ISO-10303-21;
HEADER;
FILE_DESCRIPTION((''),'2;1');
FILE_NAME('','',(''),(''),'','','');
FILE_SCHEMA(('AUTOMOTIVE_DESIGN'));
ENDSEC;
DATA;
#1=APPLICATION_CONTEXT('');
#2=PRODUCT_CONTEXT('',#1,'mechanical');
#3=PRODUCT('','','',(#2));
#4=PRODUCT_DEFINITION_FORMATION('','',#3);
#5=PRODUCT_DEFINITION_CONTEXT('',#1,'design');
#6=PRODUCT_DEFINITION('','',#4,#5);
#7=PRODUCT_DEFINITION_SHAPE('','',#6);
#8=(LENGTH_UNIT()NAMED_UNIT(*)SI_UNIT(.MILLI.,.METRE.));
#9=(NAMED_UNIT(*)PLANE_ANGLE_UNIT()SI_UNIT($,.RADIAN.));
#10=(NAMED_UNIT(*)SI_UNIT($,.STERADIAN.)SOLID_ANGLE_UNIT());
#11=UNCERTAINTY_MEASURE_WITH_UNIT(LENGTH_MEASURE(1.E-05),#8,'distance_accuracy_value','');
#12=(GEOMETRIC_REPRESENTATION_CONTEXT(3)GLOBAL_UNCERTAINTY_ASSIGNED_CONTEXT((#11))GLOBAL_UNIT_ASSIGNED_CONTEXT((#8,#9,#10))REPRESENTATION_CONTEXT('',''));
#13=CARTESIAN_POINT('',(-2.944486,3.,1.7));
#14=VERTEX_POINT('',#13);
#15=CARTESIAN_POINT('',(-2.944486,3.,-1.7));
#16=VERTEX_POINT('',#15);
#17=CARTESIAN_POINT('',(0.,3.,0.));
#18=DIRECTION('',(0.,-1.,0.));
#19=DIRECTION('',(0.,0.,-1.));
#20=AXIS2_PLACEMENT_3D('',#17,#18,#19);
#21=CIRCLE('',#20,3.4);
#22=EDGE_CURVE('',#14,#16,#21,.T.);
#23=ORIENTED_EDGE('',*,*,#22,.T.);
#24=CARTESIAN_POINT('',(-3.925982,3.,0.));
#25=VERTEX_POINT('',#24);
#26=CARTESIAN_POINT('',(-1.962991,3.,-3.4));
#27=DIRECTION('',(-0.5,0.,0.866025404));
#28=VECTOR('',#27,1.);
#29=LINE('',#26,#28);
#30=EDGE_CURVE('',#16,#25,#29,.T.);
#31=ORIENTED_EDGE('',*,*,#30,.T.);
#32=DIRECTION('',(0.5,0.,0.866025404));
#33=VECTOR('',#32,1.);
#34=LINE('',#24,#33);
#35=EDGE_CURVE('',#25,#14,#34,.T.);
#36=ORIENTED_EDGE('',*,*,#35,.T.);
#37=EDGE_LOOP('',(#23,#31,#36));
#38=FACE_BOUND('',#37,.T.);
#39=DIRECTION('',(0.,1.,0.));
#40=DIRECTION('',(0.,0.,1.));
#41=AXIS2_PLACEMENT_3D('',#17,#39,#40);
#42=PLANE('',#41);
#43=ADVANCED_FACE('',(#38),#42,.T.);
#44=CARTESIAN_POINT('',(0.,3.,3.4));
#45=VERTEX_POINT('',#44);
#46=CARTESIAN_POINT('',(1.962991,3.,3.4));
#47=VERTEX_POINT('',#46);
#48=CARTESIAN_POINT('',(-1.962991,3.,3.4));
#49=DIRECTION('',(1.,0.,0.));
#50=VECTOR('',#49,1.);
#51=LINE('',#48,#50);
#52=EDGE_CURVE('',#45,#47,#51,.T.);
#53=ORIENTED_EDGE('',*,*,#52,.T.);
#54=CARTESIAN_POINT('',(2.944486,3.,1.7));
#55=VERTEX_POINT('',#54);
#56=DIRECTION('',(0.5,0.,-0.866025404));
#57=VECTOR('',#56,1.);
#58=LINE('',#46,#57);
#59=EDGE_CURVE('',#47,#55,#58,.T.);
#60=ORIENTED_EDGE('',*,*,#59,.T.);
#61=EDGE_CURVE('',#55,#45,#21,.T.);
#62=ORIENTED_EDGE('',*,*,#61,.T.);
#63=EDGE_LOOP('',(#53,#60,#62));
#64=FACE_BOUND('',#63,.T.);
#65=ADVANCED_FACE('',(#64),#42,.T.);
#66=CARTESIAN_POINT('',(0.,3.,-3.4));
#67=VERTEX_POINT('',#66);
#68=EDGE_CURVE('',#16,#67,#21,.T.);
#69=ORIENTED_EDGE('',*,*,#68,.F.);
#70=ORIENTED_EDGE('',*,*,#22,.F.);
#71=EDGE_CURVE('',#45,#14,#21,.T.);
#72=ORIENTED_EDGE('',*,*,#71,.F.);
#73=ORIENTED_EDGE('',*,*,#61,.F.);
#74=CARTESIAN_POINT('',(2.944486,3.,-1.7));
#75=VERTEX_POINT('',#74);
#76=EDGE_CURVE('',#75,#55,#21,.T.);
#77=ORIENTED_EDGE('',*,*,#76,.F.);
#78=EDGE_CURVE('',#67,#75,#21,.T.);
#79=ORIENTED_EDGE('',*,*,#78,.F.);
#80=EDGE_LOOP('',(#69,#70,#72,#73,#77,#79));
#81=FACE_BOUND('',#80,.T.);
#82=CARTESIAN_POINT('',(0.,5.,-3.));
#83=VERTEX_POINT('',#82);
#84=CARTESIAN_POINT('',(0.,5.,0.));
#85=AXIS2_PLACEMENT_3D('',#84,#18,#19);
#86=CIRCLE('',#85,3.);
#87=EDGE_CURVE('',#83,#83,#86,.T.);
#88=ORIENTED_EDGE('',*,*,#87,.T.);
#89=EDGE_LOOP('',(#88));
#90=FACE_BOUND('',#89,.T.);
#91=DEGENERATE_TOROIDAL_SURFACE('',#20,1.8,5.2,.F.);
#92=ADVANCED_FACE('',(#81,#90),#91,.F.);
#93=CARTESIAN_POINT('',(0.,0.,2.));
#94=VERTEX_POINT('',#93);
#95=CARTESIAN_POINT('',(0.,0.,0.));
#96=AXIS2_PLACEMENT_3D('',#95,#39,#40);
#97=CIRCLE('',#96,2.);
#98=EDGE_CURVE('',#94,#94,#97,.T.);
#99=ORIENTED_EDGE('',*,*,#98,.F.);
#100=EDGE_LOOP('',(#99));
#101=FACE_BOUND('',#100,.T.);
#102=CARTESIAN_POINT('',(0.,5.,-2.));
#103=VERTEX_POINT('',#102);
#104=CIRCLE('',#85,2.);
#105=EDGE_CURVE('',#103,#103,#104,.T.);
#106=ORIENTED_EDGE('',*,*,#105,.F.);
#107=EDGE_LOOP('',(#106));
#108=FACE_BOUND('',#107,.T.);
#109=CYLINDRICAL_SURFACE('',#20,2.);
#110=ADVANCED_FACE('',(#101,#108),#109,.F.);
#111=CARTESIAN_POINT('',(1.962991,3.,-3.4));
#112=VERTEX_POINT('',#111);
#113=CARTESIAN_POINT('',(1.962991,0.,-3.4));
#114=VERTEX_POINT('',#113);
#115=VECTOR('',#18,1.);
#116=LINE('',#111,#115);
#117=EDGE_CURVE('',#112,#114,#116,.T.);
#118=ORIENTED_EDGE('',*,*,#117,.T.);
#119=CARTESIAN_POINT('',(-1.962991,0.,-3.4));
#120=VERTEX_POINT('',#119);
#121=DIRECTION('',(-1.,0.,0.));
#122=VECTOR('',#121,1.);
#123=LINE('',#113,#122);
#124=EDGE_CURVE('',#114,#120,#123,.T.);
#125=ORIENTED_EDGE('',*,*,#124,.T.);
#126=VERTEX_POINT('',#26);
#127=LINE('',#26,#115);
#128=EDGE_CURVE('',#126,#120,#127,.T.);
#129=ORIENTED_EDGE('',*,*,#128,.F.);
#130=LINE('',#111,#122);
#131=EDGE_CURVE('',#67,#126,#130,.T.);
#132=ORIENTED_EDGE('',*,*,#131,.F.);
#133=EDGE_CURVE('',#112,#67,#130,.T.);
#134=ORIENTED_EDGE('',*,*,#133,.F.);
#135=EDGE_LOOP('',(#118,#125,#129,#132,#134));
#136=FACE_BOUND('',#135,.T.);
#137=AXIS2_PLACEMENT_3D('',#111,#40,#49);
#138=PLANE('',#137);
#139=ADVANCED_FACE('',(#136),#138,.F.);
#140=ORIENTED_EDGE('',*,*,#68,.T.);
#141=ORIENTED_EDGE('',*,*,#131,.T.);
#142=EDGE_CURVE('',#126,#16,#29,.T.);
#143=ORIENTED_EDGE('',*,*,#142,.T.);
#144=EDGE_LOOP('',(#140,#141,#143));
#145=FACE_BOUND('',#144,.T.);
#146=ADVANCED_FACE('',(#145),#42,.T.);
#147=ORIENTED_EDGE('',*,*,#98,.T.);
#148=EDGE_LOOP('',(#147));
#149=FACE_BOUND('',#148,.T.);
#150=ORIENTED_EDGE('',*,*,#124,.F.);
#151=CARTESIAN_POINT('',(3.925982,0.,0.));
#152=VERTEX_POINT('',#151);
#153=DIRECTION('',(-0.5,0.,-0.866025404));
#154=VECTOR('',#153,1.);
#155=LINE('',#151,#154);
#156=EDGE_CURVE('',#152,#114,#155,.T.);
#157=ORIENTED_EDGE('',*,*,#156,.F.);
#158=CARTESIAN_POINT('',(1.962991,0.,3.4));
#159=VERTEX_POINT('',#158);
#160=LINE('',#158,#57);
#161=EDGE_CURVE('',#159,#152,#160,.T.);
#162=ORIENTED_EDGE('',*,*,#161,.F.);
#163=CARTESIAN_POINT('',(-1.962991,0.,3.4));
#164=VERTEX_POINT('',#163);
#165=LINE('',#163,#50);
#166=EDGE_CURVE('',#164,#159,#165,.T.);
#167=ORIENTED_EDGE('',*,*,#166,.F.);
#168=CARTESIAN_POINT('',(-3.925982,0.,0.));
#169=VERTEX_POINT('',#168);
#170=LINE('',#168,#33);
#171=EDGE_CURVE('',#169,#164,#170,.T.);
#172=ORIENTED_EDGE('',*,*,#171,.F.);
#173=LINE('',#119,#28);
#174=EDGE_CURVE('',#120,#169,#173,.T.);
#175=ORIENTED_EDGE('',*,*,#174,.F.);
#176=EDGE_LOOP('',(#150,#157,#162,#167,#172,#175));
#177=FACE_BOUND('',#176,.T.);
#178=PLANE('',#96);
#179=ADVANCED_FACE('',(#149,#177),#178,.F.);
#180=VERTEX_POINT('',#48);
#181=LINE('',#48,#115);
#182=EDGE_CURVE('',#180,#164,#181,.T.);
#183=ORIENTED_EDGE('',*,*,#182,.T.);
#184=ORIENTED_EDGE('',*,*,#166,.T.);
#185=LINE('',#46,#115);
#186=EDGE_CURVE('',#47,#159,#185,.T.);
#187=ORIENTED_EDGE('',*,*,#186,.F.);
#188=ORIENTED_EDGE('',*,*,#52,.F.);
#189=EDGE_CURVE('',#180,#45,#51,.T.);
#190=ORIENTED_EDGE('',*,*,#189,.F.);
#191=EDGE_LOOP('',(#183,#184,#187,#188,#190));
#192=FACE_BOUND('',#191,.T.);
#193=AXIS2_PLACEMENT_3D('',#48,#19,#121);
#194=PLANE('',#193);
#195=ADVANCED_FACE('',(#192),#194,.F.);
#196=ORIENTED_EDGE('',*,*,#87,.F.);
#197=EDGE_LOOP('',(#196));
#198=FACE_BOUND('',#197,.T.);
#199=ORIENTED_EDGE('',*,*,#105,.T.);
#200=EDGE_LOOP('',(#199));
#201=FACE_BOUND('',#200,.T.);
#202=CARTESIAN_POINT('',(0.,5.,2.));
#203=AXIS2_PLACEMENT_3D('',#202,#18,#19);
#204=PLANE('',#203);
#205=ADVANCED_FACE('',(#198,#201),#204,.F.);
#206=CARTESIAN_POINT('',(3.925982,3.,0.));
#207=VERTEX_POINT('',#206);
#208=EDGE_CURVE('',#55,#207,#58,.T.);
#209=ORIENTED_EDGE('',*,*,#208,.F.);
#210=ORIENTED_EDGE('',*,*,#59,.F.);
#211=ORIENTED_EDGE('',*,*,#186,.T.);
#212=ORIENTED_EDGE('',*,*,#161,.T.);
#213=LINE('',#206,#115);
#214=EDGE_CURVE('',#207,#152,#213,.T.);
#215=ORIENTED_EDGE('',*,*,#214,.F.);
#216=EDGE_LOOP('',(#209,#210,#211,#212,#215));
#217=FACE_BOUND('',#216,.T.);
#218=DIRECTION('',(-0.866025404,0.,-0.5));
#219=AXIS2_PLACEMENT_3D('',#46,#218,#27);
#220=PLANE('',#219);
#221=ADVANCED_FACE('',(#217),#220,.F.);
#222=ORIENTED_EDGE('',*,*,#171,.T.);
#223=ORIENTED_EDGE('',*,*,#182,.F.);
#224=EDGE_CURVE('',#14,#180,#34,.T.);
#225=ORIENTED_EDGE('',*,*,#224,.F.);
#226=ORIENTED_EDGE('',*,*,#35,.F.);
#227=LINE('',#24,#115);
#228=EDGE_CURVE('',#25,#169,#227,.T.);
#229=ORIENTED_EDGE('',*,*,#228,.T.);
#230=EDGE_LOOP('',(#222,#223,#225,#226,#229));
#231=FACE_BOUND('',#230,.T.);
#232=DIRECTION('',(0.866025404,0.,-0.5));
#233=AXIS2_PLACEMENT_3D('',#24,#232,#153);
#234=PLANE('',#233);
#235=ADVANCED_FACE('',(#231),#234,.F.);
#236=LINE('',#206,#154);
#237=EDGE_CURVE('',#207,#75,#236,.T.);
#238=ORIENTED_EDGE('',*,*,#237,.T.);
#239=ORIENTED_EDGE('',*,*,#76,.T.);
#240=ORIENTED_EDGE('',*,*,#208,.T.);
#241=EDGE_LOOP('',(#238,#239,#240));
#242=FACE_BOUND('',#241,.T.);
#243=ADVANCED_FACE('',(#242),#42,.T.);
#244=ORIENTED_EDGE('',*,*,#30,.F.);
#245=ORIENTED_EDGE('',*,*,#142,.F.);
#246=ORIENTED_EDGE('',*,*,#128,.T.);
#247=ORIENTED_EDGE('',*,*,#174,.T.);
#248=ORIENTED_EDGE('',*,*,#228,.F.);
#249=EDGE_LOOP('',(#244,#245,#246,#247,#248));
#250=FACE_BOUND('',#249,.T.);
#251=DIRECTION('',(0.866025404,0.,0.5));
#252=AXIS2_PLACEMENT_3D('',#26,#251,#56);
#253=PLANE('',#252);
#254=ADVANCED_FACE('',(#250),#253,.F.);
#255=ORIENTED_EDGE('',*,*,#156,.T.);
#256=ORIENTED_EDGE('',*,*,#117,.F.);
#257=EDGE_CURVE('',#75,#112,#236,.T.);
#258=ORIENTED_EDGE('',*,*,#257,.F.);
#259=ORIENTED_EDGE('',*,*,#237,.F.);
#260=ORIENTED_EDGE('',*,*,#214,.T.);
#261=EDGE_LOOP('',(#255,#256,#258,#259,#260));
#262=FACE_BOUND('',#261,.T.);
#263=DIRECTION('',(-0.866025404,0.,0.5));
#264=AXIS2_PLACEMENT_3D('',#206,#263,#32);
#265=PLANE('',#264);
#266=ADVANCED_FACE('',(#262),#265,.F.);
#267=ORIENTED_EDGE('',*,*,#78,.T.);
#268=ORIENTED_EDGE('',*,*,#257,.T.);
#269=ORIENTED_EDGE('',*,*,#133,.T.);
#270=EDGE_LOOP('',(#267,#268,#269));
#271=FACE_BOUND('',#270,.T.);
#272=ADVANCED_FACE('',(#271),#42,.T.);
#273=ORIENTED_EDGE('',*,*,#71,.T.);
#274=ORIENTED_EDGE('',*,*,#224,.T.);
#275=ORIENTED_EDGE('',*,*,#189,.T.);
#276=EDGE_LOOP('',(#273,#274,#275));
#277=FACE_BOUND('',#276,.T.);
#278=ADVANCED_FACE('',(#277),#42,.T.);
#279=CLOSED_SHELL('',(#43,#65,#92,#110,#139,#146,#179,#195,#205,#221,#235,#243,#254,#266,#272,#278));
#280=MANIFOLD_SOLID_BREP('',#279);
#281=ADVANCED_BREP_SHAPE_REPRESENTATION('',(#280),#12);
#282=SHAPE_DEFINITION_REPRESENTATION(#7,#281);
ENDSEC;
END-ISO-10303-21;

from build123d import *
from build123d.topology import SkipClean

# Parameters (mm, degrees)
SKETCH1_R           = 2
BOSS_EXTRUDE1_DEPTH = 3


with BuildPart() as part:
    # Sketch1 → Boss-Extrude1 (new body)
    with BuildSketch(Plane(origin=(0, 0, 0), x_dir=(1, 0, 0), z_dir=(0, 1, 0))):
        Polygon((-1.962990915, -3.4), (1.962990915, -3.4), (3.92598183, 0), (1.962990915, 3.4), (-1.962990915, 3.4), (-3.92598183, 0), align=None)
        Circle(SKETCH1_R, mode=Mode.SUBTRACT)
    extrude(amount=BOSS_EXTRUDE1_DEPTH)

    # Sketch2 → Revolve1 (revolve)
    with SkipClean():  # the faces are left unmerged after this step: merging them gives an invalid solid
        with BuildSketch(Plane(origin=(0, 0, 0), x_dir=(0, 0, -1), z_dir=(1, 0, 0))):
            with BuildLine():
                Line((-2, 3), (-2, 5))
                Line((-2, 5), (-3, 5))
                ThreePointArc((-3, 5), (-3.299019514, 4.019803903), (-3.4, 3))
                Line((-3.4, 3), (-2, 3))
            make_face()
        revolve(axis=Axis((0, 0, 0), (0, 1, 0)))
    add(part.part.scale(1), mode=Mode.REPLACE)  # the faces are merged on a copy


solid = part.part
